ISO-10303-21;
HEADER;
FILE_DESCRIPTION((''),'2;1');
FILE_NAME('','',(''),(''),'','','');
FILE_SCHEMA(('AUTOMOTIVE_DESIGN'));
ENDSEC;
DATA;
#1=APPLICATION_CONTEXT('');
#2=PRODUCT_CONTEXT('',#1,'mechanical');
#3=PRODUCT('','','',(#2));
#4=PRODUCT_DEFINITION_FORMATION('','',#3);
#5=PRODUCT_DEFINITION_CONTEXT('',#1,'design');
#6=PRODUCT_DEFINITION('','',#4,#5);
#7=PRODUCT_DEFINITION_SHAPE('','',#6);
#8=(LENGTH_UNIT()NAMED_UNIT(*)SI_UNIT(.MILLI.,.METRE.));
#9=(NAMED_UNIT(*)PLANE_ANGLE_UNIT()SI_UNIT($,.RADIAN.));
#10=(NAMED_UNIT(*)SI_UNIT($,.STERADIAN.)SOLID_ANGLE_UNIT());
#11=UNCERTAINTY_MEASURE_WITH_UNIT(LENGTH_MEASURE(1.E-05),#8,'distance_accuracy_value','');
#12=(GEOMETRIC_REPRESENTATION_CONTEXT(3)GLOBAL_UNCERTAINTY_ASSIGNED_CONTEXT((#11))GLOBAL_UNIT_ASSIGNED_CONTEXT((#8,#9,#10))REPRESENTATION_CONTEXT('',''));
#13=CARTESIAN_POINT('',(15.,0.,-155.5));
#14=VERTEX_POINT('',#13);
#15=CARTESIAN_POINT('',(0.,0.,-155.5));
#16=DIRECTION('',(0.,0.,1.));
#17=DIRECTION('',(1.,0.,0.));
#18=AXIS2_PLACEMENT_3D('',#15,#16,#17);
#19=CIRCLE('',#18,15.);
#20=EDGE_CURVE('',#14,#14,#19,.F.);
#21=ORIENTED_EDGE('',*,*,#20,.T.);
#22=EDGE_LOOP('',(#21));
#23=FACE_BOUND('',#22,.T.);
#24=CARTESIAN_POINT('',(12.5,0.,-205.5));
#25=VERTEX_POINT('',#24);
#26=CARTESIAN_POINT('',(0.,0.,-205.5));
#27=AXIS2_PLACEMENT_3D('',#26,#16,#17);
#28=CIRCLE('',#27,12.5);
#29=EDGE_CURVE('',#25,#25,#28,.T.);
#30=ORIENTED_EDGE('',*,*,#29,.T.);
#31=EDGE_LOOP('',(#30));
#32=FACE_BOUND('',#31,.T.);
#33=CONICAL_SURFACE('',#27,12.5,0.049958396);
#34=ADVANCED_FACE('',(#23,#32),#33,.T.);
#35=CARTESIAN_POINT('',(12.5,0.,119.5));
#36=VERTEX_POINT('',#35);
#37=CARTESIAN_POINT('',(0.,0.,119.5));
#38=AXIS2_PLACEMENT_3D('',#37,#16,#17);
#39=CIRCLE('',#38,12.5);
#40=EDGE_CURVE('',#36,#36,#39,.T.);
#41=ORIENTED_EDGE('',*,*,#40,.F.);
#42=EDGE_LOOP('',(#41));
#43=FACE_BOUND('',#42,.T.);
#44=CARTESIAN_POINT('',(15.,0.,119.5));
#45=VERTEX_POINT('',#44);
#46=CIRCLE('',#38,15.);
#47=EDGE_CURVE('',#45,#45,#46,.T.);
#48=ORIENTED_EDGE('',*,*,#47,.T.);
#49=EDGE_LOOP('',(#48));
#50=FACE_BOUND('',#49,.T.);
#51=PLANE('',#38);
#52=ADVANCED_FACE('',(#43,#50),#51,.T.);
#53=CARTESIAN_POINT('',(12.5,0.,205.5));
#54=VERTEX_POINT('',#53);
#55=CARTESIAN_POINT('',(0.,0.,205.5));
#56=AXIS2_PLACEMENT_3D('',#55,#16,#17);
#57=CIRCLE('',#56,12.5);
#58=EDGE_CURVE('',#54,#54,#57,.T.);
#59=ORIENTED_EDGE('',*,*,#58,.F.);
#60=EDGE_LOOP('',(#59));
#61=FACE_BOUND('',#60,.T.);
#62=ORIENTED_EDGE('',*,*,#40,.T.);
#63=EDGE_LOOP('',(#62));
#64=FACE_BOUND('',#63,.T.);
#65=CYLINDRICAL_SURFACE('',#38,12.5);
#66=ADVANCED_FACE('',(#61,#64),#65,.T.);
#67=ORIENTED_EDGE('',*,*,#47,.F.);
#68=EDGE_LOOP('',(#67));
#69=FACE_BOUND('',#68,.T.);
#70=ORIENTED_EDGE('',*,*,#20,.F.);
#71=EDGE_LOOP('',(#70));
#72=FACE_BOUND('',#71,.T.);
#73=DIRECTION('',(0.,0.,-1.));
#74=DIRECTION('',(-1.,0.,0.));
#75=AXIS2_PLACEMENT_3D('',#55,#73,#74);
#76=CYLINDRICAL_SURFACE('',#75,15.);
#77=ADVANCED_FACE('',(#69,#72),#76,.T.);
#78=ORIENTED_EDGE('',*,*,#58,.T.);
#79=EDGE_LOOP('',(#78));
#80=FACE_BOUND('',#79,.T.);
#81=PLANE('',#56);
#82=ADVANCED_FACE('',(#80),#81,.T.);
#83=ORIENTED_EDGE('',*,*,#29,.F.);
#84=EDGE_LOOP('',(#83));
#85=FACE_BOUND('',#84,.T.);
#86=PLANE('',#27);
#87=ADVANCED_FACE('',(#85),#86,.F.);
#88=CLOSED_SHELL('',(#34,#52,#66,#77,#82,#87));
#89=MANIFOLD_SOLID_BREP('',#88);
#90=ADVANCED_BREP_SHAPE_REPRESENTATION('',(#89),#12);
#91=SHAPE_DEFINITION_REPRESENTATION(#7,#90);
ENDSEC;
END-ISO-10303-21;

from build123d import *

# Parameters (mm, degrees)
SKETCH_1_R          = 15
EXTRUDE_1_DEPTH     = 205.5
SKETCH_2_R          = 15
SKETCH_2_R_2        = 12.5
CUT_EXTRUDE_1_DEPTH = 86


# Read off the part's stored shape, not the designer's step: 切除-旋转3
with BuildPart() as part:
    # 草图1 → 凸台-拉伸1 (new, symmetric)
    with BuildSketch(Plane.XY):
        Circle(SKETCH_1_R)
    extrude(amount=EXTRUDE_1_DEPTH, both=True)

    # 草图2 → 切除-拉伸1 (cut)
    with BuildSketch(Plane.XY.offset(205.5)):
        Circle(SKETCH_2_R)
        Circle(SKETCH_2_R_2, mode=Mode.SUBTRACT)
    extrude(amount=-CUT_EXTRUDE_1_DEPTH, mode=Mode.SUBTRACT)

    # 切除-旋转3 outline → 切除-旋转3 (revolve, cut)
    with BuildSketch(Plane.XZ):
        Polygon((15, -155.5), (12.5, -205.5), (15, -205.5), align=None)
    revolve(axis=Axis((0, 0, 0), (0, 0, 1)), mode=Mode.SUBTRACT)


solid = part.part
